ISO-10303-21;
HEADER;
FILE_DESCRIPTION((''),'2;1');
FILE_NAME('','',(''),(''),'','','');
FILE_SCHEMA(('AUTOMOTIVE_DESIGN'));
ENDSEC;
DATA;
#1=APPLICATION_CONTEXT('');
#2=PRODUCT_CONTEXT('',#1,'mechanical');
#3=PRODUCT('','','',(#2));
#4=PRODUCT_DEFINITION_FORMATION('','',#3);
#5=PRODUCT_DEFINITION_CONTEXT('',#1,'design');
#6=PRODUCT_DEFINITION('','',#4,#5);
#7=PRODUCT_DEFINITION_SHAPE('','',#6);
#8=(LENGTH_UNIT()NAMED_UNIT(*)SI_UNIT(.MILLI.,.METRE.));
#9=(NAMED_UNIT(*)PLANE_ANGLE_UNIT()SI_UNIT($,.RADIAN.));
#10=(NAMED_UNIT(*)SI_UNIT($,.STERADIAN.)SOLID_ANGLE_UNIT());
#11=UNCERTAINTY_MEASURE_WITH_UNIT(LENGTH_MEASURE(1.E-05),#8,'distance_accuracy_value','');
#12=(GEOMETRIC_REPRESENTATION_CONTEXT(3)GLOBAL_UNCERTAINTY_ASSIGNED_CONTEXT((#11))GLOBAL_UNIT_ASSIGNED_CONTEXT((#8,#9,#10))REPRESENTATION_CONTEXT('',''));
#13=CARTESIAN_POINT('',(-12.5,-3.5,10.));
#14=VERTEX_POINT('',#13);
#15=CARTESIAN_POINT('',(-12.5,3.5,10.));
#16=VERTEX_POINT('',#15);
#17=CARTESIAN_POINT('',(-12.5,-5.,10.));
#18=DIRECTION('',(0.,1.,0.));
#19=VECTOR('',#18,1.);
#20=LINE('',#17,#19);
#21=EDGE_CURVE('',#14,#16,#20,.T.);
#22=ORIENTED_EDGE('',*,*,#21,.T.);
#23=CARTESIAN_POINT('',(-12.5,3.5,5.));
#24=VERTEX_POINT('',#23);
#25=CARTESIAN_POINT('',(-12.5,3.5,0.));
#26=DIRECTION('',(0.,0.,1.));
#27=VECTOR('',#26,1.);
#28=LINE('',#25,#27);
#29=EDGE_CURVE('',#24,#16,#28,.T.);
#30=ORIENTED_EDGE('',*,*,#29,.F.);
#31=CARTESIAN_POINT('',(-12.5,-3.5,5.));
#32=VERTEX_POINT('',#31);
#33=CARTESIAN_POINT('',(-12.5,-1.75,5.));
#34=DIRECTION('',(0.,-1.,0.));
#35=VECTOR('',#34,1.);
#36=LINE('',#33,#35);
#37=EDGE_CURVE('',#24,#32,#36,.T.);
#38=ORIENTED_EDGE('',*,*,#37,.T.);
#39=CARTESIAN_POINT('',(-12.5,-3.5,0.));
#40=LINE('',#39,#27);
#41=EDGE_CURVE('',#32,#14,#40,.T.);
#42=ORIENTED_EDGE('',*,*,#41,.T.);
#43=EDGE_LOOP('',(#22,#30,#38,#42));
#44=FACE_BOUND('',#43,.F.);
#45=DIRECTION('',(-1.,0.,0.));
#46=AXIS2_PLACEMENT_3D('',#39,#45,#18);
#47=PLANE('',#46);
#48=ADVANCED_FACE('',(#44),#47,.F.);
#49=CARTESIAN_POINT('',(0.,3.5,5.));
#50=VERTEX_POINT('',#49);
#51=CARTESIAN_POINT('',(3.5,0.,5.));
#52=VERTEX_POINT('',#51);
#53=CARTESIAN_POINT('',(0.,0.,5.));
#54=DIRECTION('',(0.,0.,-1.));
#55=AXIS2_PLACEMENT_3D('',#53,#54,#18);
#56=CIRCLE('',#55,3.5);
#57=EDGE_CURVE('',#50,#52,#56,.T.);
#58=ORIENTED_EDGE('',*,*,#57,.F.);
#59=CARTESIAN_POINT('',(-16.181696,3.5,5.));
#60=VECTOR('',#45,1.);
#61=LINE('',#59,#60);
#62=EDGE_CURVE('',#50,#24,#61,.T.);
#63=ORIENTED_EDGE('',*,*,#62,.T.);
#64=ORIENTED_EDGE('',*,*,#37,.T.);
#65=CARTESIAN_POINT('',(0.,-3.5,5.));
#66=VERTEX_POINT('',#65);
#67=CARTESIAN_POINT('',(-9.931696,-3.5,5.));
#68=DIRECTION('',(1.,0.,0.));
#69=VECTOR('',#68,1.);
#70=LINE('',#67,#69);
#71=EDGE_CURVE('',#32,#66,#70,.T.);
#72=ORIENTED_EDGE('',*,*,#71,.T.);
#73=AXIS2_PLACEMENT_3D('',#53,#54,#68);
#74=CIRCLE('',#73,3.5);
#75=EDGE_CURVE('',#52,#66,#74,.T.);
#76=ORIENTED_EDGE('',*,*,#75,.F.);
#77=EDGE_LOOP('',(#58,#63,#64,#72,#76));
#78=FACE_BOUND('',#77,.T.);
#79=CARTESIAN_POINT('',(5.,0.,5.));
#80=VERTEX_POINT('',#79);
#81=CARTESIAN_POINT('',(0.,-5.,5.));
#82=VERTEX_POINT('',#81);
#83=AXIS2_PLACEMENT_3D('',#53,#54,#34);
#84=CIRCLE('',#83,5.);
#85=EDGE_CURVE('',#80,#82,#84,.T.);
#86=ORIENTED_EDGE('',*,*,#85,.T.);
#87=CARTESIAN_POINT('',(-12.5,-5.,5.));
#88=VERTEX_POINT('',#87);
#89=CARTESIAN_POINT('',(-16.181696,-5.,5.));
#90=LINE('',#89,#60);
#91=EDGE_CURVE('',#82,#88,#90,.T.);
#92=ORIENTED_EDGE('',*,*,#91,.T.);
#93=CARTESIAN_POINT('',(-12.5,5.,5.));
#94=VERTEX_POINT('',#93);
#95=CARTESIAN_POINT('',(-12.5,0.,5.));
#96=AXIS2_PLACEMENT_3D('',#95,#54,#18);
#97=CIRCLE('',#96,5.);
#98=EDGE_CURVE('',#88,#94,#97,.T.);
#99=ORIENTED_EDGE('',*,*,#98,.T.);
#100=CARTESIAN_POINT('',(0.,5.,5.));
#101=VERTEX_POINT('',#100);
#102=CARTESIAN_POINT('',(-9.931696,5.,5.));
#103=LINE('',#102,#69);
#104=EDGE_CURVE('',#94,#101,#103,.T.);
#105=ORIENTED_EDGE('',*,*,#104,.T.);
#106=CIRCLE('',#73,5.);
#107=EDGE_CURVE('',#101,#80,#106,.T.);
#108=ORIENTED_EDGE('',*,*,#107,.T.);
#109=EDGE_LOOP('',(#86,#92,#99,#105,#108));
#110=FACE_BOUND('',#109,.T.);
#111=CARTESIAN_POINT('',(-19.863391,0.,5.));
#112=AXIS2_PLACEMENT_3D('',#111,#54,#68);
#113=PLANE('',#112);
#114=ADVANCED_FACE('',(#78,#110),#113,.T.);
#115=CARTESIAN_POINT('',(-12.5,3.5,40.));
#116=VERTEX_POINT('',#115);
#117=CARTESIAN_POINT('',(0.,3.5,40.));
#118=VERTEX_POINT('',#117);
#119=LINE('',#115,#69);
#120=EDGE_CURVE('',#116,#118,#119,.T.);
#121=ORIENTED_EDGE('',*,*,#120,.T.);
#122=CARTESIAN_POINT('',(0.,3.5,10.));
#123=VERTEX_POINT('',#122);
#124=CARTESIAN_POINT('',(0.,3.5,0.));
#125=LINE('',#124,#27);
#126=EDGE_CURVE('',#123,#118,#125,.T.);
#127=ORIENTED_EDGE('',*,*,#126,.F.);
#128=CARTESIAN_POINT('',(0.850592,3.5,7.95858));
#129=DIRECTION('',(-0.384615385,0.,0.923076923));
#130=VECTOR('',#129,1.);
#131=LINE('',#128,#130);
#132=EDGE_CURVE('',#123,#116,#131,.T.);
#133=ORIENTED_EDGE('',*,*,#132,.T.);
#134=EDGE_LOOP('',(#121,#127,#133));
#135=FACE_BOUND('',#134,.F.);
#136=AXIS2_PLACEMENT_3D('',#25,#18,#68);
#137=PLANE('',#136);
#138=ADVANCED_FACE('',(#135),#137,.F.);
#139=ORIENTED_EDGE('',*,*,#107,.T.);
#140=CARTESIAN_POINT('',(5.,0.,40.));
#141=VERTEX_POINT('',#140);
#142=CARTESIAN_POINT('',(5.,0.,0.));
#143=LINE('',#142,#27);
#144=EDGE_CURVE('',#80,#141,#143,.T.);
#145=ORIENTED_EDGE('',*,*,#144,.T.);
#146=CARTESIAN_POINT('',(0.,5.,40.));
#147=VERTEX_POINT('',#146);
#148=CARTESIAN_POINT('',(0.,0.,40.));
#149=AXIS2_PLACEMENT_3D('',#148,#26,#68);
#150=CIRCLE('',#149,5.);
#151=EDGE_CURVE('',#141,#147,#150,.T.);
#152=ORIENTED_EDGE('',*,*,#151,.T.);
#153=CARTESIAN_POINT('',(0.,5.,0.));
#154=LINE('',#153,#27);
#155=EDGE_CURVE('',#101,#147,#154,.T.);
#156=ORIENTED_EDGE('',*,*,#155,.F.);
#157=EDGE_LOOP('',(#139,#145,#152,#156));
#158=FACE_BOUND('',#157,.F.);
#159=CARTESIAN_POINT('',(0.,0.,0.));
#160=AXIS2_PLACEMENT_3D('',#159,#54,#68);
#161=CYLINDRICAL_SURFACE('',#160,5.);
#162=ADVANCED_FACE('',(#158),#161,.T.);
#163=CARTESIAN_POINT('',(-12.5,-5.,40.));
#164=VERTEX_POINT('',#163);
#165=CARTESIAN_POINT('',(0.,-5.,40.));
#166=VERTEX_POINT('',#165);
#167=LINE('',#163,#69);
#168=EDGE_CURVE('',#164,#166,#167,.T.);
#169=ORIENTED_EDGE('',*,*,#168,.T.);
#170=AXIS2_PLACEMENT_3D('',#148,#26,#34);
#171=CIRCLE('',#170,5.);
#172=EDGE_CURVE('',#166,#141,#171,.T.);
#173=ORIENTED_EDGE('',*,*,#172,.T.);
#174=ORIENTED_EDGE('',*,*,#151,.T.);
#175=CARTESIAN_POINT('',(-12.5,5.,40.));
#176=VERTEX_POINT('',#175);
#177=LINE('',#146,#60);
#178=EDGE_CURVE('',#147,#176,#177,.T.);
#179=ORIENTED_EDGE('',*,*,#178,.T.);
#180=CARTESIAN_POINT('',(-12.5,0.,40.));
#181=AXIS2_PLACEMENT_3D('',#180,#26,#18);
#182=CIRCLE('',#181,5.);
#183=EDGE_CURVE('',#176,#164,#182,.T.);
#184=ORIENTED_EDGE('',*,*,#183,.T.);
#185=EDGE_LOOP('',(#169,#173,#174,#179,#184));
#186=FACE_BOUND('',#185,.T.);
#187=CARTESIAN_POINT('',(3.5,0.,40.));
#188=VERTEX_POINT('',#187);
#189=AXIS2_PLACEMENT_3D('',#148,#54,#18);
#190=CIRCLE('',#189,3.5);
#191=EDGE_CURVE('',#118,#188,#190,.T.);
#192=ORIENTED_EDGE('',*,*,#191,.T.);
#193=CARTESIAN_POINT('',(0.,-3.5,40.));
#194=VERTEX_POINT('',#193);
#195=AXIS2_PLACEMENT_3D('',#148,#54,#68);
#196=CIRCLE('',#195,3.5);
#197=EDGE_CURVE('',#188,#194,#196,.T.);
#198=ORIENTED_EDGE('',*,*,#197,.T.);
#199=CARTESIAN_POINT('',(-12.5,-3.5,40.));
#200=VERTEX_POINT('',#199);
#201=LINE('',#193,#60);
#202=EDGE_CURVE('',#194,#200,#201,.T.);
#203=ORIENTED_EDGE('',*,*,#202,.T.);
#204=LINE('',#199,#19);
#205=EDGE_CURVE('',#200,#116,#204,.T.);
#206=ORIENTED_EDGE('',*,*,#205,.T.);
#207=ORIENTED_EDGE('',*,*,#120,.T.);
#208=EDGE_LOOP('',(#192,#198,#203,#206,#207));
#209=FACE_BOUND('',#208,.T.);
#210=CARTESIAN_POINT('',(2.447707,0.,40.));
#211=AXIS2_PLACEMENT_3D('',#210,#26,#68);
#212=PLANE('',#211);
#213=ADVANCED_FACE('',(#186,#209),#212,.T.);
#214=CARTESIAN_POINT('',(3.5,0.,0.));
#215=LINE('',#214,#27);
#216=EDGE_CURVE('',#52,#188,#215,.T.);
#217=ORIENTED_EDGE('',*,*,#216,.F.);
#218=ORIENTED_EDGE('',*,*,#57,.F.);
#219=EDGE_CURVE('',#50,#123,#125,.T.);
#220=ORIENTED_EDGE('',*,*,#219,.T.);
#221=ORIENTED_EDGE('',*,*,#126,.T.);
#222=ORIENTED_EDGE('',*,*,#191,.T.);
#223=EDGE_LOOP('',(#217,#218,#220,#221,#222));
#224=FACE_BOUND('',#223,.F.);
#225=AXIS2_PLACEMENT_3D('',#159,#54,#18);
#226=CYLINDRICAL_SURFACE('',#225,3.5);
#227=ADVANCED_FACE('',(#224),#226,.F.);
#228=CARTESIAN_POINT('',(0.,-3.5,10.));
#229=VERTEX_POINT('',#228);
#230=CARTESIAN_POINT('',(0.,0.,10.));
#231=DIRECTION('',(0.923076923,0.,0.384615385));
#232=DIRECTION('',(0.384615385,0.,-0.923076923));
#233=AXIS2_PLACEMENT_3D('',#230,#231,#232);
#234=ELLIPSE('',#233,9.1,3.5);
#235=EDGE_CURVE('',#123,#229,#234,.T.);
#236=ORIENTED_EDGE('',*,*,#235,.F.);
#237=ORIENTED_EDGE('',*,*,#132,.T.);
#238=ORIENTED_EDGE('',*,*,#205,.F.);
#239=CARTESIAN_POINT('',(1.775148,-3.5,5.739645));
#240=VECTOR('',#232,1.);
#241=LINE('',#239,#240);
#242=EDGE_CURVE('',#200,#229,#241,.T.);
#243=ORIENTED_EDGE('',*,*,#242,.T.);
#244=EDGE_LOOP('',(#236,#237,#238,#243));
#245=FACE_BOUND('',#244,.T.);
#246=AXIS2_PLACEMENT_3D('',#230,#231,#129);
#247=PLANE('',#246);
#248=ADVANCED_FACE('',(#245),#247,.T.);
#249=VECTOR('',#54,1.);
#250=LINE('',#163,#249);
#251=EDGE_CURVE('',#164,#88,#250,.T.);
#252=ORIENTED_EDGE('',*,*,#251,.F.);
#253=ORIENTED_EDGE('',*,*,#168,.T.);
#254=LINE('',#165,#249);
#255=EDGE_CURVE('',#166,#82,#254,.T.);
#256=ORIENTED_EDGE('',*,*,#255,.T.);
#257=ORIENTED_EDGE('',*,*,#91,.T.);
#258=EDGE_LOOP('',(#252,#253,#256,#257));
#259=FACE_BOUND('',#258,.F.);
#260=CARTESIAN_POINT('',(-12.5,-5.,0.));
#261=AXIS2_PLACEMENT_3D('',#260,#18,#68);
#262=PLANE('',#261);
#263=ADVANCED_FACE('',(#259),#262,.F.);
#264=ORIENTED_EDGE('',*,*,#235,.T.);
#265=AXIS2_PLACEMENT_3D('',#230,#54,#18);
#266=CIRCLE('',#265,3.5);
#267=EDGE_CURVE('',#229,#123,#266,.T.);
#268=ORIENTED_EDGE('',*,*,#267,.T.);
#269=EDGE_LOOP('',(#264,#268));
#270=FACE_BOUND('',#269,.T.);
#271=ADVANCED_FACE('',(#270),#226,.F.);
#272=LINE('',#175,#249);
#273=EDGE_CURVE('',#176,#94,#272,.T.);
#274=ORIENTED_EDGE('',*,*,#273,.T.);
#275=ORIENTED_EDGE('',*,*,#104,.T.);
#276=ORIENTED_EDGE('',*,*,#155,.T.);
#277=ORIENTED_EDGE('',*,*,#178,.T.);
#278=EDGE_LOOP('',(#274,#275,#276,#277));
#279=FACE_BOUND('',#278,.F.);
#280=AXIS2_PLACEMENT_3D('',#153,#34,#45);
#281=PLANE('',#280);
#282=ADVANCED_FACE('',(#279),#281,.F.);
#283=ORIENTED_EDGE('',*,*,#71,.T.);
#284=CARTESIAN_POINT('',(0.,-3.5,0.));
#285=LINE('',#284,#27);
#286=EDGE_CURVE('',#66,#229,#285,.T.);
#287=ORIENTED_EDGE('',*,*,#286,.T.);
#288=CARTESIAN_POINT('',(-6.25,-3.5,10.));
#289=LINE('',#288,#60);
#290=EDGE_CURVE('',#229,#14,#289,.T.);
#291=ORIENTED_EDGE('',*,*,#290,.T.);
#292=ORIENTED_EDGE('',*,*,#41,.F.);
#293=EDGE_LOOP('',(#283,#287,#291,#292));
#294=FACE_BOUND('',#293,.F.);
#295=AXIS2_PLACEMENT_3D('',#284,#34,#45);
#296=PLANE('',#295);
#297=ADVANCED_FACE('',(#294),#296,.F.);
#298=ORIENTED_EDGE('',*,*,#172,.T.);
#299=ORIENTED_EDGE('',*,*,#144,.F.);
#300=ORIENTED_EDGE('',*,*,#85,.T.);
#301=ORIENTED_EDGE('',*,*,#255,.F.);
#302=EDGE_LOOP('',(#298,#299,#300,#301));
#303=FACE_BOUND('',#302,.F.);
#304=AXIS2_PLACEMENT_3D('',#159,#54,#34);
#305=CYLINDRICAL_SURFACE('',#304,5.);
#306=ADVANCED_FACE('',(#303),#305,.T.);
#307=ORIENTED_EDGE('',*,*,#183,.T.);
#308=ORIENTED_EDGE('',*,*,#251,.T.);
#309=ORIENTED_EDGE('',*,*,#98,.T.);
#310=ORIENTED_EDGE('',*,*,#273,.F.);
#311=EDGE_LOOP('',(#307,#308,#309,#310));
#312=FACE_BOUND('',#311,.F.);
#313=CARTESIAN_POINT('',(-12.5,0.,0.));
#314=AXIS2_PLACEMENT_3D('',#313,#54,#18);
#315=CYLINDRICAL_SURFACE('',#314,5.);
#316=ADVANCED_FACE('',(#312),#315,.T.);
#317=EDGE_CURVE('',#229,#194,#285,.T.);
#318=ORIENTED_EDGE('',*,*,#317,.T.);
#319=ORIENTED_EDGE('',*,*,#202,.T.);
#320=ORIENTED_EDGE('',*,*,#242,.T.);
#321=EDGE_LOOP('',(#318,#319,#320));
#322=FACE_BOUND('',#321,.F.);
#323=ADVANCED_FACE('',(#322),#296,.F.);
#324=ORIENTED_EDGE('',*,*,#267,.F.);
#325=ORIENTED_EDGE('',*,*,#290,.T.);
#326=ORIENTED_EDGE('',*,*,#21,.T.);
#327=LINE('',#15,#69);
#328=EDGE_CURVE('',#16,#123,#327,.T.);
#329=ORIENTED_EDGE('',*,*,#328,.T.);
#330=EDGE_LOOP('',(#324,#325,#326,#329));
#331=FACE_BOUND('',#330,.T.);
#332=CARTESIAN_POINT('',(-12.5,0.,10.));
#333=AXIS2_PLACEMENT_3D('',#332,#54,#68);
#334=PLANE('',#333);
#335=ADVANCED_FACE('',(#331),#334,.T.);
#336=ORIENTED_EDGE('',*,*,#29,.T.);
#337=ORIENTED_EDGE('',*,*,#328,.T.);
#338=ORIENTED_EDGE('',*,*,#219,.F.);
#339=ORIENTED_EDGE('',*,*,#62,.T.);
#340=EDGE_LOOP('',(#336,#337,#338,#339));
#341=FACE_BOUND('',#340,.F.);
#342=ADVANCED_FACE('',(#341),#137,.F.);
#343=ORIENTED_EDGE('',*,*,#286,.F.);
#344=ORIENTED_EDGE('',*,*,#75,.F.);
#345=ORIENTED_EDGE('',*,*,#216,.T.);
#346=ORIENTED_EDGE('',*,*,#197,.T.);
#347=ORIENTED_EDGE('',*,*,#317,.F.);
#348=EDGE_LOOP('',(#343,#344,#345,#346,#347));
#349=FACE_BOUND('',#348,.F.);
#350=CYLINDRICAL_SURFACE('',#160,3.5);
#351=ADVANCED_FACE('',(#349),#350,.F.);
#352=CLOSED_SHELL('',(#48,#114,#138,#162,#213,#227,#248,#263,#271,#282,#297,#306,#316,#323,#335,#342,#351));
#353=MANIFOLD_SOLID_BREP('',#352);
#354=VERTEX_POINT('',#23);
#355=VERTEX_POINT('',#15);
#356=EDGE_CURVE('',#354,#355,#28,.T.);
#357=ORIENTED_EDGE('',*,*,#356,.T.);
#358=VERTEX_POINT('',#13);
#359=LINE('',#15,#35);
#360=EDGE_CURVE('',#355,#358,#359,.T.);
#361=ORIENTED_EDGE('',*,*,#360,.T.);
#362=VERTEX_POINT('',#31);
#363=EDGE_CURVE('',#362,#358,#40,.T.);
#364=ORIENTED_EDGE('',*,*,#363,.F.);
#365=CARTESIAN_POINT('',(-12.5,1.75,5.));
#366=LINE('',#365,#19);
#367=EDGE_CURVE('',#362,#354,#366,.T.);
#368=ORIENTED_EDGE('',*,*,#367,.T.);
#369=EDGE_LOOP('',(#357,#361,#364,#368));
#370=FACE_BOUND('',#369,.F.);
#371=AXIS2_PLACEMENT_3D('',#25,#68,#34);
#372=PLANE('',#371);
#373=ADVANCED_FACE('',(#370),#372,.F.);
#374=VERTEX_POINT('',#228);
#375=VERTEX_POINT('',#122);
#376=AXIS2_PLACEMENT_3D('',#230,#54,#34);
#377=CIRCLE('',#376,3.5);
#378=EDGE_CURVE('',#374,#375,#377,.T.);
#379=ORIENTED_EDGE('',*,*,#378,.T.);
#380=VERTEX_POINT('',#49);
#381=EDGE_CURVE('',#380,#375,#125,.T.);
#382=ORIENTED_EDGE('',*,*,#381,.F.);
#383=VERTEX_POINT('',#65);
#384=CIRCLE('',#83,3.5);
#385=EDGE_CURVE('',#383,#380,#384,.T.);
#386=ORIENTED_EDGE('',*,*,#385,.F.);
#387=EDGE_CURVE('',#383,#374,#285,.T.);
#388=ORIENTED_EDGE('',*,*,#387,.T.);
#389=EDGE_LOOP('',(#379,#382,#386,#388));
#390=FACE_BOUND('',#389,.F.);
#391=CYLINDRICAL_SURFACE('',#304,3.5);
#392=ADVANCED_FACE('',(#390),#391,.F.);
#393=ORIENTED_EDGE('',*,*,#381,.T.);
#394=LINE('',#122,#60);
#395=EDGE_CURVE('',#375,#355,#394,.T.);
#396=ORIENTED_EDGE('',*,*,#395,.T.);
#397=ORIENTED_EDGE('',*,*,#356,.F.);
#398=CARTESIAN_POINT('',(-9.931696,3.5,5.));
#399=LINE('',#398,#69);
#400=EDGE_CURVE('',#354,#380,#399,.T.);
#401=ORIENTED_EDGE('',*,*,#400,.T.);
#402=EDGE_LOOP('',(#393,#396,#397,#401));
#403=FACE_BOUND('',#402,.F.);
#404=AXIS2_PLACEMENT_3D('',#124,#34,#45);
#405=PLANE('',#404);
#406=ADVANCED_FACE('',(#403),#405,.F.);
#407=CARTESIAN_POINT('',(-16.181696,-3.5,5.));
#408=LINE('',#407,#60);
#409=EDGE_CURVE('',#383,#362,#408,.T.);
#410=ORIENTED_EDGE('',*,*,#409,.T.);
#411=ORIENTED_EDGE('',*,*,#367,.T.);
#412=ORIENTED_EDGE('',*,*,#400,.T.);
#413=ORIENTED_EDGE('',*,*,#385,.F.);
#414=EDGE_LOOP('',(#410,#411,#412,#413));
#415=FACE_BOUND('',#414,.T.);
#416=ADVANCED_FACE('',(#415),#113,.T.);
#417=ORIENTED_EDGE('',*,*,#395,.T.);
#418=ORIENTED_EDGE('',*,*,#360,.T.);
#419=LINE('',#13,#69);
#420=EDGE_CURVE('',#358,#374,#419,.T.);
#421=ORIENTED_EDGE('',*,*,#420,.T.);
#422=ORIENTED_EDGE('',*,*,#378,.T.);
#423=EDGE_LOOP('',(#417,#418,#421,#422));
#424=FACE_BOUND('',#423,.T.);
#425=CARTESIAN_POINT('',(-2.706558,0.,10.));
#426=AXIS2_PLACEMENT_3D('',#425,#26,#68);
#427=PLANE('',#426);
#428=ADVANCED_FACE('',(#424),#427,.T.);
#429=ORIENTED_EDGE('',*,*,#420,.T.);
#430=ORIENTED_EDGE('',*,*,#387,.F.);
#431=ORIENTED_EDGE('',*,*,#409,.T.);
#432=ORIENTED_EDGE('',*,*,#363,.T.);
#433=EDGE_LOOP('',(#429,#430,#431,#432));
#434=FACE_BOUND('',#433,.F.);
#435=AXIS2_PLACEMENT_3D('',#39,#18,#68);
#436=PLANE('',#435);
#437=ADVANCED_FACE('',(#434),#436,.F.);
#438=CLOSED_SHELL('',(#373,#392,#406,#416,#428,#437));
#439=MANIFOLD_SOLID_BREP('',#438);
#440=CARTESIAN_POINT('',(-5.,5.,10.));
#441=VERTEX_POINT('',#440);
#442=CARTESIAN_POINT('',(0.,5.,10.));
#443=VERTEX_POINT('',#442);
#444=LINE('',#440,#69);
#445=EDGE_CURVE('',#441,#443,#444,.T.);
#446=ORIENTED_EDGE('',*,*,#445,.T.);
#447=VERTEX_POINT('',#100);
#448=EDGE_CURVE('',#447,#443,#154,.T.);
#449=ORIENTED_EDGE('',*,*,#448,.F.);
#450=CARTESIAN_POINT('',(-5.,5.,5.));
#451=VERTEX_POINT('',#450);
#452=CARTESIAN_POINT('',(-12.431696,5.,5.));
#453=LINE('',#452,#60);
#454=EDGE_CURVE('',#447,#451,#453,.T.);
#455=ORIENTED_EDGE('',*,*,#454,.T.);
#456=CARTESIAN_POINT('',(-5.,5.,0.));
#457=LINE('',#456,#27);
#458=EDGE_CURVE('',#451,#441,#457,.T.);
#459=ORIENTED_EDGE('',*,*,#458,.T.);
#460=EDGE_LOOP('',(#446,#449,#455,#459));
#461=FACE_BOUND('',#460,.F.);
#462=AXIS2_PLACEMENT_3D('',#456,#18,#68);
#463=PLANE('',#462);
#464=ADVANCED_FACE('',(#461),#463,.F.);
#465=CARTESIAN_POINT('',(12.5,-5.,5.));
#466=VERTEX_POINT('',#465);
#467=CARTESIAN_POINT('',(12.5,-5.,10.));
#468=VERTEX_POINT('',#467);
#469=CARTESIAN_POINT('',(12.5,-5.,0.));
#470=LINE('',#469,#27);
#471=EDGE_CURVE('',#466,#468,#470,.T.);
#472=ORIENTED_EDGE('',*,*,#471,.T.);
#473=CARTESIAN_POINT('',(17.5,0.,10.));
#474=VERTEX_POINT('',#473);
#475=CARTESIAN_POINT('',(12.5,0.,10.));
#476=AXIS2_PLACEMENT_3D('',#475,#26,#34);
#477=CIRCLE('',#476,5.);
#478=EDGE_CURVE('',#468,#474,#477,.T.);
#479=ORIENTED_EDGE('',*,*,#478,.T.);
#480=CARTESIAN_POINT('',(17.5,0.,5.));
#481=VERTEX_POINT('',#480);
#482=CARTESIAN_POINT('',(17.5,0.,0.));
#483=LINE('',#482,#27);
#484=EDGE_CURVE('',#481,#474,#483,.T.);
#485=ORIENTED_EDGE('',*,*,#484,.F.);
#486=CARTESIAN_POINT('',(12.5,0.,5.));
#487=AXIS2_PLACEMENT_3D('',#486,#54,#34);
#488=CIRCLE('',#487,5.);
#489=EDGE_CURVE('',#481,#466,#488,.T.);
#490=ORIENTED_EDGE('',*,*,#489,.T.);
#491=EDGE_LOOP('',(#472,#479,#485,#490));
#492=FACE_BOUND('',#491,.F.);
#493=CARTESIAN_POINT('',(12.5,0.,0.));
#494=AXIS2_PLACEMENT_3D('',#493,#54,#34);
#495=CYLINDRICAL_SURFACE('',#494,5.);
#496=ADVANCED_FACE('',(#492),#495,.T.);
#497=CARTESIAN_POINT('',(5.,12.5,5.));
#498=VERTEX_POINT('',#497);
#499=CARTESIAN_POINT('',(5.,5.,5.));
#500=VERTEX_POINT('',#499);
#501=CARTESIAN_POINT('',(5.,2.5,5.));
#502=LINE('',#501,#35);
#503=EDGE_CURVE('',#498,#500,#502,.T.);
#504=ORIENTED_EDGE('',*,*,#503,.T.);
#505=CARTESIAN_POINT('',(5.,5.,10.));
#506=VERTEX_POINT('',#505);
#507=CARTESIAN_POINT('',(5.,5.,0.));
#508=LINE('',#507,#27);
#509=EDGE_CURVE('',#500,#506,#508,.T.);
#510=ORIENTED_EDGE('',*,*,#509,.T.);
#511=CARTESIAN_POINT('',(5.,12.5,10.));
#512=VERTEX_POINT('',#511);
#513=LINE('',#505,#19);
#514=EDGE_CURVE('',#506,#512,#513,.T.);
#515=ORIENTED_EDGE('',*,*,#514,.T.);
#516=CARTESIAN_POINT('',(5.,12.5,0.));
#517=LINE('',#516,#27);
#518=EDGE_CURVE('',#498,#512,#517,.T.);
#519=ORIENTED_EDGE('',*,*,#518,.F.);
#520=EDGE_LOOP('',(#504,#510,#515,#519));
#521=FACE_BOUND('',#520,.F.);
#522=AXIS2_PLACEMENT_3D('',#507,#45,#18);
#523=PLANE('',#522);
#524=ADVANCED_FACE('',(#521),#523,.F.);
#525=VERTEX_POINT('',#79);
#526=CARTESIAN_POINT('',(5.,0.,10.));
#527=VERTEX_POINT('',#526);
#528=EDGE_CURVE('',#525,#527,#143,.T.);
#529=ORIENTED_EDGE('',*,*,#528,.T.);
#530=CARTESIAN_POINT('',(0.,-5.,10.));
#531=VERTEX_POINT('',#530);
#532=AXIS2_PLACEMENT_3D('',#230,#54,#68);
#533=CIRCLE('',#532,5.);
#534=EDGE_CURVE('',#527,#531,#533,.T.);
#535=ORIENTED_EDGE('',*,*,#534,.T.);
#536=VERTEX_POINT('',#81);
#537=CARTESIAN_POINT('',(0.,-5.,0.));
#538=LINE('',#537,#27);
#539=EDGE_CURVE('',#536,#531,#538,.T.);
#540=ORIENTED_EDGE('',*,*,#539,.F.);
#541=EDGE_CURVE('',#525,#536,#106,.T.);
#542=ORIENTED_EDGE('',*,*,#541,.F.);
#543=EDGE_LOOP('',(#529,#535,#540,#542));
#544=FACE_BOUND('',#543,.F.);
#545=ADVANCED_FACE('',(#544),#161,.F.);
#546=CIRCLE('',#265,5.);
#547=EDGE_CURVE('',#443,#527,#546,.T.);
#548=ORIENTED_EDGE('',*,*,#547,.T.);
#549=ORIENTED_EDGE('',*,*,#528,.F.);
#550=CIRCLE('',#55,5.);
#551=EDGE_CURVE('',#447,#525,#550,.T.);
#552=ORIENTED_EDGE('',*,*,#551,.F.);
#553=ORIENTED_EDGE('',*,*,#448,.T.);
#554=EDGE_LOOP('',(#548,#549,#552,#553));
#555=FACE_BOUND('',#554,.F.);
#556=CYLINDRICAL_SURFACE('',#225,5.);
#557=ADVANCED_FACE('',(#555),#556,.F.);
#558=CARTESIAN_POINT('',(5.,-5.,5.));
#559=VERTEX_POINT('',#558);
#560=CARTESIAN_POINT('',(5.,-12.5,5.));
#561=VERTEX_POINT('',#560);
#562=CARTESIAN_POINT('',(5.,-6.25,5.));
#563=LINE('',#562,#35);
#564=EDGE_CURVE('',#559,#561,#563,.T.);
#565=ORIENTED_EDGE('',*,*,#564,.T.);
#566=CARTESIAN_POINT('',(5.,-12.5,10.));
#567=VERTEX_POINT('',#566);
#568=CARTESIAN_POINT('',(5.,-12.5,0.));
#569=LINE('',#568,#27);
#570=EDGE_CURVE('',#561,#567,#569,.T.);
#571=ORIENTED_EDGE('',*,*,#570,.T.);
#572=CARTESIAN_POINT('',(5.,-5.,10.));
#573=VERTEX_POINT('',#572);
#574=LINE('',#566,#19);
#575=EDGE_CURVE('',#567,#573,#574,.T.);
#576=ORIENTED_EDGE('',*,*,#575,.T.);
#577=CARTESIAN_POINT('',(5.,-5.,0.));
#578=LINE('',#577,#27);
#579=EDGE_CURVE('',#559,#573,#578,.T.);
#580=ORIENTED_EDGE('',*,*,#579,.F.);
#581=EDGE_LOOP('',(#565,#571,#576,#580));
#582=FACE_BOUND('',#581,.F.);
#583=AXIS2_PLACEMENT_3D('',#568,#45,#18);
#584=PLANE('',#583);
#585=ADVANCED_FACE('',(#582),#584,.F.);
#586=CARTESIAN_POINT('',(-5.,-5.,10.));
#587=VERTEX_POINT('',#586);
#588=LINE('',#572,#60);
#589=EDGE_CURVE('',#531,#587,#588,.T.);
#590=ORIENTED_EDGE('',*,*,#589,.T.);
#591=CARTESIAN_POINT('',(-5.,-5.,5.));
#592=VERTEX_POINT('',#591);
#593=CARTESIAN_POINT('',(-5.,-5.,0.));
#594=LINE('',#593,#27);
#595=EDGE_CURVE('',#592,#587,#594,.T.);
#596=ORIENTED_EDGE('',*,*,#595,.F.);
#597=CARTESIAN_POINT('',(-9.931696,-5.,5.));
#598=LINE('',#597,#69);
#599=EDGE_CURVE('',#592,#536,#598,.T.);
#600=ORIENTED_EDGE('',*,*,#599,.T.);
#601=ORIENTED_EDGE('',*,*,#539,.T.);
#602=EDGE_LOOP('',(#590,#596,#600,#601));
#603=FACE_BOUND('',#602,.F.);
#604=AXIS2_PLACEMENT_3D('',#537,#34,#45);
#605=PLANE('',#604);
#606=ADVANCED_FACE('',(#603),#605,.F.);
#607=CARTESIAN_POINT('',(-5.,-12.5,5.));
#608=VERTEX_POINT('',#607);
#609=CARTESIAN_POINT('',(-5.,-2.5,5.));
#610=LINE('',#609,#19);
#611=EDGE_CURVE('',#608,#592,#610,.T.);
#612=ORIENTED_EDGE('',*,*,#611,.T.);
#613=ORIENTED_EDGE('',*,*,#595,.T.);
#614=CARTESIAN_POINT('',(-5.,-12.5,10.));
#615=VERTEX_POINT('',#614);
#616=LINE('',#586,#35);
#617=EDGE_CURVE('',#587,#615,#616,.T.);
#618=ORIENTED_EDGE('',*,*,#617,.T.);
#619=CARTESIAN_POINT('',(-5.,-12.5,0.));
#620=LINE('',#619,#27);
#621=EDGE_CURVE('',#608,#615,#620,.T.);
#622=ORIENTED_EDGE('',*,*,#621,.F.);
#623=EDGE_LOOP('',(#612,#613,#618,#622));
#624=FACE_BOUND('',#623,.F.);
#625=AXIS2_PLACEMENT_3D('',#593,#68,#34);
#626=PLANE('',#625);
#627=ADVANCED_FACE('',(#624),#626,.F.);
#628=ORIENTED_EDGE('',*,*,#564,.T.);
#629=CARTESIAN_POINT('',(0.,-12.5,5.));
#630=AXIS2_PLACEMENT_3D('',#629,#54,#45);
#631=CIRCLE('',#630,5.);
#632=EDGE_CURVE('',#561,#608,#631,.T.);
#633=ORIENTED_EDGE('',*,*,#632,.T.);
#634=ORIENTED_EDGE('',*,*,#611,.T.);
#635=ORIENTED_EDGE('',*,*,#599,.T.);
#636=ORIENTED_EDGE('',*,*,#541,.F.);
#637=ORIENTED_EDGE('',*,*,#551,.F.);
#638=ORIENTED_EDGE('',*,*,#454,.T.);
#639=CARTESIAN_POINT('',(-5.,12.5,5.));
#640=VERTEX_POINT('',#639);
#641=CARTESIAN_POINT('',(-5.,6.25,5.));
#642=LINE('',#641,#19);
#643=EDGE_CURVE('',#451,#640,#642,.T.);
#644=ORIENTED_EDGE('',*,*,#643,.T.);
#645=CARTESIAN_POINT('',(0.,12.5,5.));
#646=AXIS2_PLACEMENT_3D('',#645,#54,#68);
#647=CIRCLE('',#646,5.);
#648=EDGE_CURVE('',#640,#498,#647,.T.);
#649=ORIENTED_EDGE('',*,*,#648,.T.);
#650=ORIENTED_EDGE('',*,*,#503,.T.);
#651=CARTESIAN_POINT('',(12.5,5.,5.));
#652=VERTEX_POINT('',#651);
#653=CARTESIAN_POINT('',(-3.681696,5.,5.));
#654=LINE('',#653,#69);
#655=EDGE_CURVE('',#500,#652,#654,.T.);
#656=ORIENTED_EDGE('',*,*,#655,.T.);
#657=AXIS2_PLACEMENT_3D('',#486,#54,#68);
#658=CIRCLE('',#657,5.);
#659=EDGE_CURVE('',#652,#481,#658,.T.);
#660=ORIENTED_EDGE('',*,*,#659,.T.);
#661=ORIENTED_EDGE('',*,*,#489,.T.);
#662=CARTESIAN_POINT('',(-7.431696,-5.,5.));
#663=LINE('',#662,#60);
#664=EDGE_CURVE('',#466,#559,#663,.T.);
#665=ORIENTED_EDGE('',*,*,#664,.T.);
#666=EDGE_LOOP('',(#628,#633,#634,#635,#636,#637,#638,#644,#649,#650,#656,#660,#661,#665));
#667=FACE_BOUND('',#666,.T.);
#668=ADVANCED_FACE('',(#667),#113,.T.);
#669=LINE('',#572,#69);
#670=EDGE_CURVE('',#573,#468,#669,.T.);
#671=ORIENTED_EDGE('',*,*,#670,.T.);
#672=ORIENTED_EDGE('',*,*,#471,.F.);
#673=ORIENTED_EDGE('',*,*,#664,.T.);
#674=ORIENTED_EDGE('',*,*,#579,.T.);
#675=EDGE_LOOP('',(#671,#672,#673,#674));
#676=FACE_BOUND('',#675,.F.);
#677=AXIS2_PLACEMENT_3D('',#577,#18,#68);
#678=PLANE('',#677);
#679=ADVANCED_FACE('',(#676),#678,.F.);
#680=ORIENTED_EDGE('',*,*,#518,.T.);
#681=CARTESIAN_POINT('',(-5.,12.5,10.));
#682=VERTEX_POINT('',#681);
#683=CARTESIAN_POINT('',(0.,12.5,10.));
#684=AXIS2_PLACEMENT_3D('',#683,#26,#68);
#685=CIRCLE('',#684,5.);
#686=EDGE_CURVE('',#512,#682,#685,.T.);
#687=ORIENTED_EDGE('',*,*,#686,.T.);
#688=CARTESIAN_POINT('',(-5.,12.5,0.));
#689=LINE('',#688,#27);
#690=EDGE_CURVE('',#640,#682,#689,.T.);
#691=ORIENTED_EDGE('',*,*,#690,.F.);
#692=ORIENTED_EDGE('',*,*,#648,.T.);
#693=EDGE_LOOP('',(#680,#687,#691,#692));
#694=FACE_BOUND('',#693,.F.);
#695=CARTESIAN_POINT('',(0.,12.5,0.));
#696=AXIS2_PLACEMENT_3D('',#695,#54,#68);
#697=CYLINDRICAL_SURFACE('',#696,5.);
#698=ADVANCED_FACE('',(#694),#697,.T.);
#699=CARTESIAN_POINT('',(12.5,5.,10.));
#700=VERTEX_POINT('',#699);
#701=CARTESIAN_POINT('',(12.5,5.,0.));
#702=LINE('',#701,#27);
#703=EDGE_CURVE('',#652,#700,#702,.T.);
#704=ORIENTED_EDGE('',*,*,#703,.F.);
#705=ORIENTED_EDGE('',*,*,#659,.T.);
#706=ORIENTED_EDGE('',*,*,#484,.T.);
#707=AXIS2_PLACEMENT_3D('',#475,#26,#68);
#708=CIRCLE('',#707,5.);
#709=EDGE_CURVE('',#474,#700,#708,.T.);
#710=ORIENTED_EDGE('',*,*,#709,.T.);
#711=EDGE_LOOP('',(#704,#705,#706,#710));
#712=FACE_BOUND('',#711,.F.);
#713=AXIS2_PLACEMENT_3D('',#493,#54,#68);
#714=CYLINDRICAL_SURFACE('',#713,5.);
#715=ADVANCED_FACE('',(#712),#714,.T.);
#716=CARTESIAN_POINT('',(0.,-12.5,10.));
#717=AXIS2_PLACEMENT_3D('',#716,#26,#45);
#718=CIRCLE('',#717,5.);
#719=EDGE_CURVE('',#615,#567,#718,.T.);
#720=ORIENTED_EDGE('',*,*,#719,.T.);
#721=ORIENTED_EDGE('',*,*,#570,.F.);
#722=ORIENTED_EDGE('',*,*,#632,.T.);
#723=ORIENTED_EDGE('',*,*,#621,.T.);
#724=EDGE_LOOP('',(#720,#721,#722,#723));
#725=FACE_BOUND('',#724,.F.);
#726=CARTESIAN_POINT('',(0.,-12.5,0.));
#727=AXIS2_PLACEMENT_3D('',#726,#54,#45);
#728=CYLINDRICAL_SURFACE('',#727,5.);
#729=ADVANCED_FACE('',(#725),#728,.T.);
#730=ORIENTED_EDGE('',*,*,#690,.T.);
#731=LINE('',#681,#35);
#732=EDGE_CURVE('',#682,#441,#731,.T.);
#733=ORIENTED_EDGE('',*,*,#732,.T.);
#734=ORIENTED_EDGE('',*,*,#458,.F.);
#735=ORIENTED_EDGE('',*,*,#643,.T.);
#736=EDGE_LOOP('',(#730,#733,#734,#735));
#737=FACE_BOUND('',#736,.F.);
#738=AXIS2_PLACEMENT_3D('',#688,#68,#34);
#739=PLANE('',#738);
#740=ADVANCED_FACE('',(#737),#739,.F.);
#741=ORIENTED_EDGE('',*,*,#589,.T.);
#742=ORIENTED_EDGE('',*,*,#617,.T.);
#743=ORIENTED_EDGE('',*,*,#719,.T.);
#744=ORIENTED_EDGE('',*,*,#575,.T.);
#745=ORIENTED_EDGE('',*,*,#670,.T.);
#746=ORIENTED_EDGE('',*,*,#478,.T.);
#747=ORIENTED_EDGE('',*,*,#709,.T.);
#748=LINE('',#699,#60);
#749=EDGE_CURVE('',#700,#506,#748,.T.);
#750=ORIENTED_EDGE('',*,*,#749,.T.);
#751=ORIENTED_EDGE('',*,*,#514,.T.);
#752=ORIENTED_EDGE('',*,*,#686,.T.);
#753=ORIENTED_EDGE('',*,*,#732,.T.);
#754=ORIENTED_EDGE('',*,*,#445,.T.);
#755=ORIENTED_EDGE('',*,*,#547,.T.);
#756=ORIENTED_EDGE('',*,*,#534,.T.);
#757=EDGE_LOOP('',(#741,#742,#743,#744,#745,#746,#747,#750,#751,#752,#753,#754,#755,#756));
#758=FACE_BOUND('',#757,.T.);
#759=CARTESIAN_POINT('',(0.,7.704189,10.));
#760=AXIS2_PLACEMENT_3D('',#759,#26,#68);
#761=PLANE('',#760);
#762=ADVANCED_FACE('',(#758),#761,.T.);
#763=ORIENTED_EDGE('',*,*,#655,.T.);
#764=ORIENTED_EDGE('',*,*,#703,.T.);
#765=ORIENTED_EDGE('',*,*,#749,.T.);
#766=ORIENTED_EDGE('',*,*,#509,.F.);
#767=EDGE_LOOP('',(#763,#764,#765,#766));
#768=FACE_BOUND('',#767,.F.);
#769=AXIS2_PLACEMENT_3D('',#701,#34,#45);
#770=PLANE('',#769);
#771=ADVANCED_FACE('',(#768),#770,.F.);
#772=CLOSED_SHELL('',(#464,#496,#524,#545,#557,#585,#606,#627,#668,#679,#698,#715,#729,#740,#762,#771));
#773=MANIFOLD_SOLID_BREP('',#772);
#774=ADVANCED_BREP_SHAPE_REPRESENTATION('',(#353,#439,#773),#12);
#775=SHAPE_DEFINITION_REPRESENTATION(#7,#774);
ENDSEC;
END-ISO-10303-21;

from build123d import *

# Parameters (mm, degrees)
F2_DEPTH  = 5
F3_DEPTH  = 40
F4_DEPTH  = 10
F5_DEPTH  = 40
F9_DEPTH  = 3
F10_SIZE  = 2
F12_DEPTH = 20


# Not quite as in the source:
# - a feature of the source that left no trace in its solid (it failed there, or was rolled back) is left out


with BuildPart() as f2:
    # F1 (on Front) → F2 (new body, symmetric)
    with BuildSketch(Plane.XZ):
        Polygon((-12.5, 10), (0, 10), (-12.5, 40), align=None)
    extrude(amount=F2_DEPTH, both=True)

    # F0 (on Top) → F3 (join)
    with BuildSketch(Plane.XY):
        with BuildLine():
            ThreePointArc((0, -5), (3.5355339059, -3.5355339059), (5, 0))
            ThreePointArc((5, 0), (3.5355339059, 3.5355339059), (0, 5))
            Line((0, 5), (0, 3.5))
            ThreePointArc((0, 3.5), (2.4748737342, 2.4748737342), (3.5, 0))
            ThreePointArc((3.5, 0), (2.4748737342, -2.4748737342), (0, -3.5))
            Line((0, -3.5), (0, -5))
        make_face()
        with BuildLine():
            Line((0, 3.5), (0, 5))
            ThreePointArc((0, 5), (-1.9364916731, 4.6097722286), (-3.5707142143, 3.5))
            Line((-3.5707142143, 3.5), (0, 3.5))
        make_face()
        with BuildLine():
            ThreePointArc((-3.5707142143, 3.5), (-1.9364916731, 4.6097722286), (0, 5))
            Line((0, 5), (-5, 5))
            Line((-5, 5), (-5, 3.5))
            Line((-5, 3.5), (-3.5707142143, 3.5))
        make_face()
        with BuildLine():
            Line((-5, 3.5), (-5, 5))
            Line((-5, 5), (-11.4564392374, 5))
            ThreePointArc((-11.4564392374, 5), (-11.4783307541, 4.9495376652), (-11.5, 4.8989794856))
            ThreePointArc((-11.5, 4.8989794856), (-10.1099910027, 4.3917942794), (-8.9292857857, 3.5))
            Line((-8.9292857857, 3.5), (-5, 3.5))
        make_face()
        with BuildLine():
            Line((-12, 3.5), (-8.9292857857, 3.5))
            ThreePointArc((-8.9292857857, 3.5), (-10.1099910027, 4.3917942794), (-11.5, 4.8989794856))
            ThreePointArc((-11.5, 4.8989794856), (-11.7708022624, 4.2069245417), (-12, 3.5))
        make_face()
        with BuildLine():
            ThreePointArc((-12, 3.5), (-11.7708022624, 4.2069245417), (-11.5, 4.8989794856))
            ThreePointArc((-11.5, 4.8989794856), (-11.99745519, 4.974680765), (-12.5, 5))
            Line((-12.5, 5), (-12.5, 3.5))
            Line((-12.5, 3.5), (-12, 3.5))
        make_face()
        with BuildLine():
            ThreePointArc((-12.5, -5), (-11.99745519, -4.974680765), (-11.5, -4.8989794856))
            ThreePointArc((-11.5, -4.8989794856), (-11.7708022624, -4.2069245417), (-12, -3.5))
            Line((-12, -3.5), (-12.5, -3.5))
            Line((-12.5, -3.5), (-12.5, -5))
        make_face()
        with BuildLine():
            ThreePointArc((-11.5, -4.8989794856), (-10.1099910027, -4.3917942794), (-8.9292857857, -3.5))
            Line((-8.9292857857, -3.5), (-12, -3.5))
            ThreePointArc((-12, -3.5), (-11.7708022624, -4.2069245417), (-11.5, -4.8989794856))
        make_face()
        with BuildLine():
            Line((-11.4564392374, -5), (-5, -5))
            Line((-5, -5), (-5, -3.5))
            Line((-5, -3.5), (-8.9292857857, -3.5))
            ThreePointArc((-8.9292857857, -3.5), (-10.1099910027, -4.3917942794), (-11.5, -4.8989794856))
            ThreePointArc((-11.5, -4.8989794856), (-11.4783307541, -4.9495376652), (-11.4564392374, -5))
        make_face()
        with BuildLine():
            Line((-5, -5), (0, -5))
            ThreePointArc((0, -5), (-1.9364916731, -4.6097722286), (-3.5707142143, -3.5))
            Line((-3.5707142143, -3.5), (-5, -3.5))
            Line((-5, -3.5), (-5, -5))
        make_face()
        with BuildLine():
            ThreePointArc((-3.5707142143, -3.5), (-1.9364916731, -4.6097722286), (0, -5))
            Line((0, -5), (0, -3.5))
            Line((0, -3.5), (-3.5707142143, -3.5))
        make_face()
        with BuildLine():
            Line((-12.5, -5), (-11.4564392374, -5))
            ThreePointArc((-11.4564392374, -5), (-11.4783307541, -4.9495376652), (-11.5, -4.8989794856))
            ThreePointArc((-11.5, -4.8989794856), (-11.99745519, -4.974680765), (-12.5, -5))
        make_face()
        with BuildLine():
            ThreePointArc((-11.5, 4.8989794856), (-11.4783307541, 4.9495376652), (-11.4564392374, 5))
            Line((-11.4564392374, 5), (-12.5, 5))
            ThreePointArc((-12.5, 5), (-11.99745519, 4.974680765), (-11.5, 4.8989794856))
        make_face()
        with BuildLine():
            Line((-12.5, 0), (-12.5, 3))
            ThreePointArc((-12.5, 3), (-15.5, 0), (-12.5, -3))
            Line((-12.5, -3), (-12.5, 0))
        make_face()
        with BuildLine():
            Line((-12.5, 3.5), (-12.5, 5))
            ThreePointArc((-12.5, 5), (-17.5, 0), (-12.5, -5))
            Line((-12.5, -5), (-12.5, -3.5))
            Line((-12.5, -3.5), (-12.5, -3))
            ThreePointArc((-12.5, -3), (-15.5, 0), (-12.5, 3))
            Line((-12.5, 3), (-12.5, 3.5))
        make_face()
    extrude(amount=F3_DEPTH)

    # F0 (on Top) → F5 (cut)
    with BuildSketch(Plane.XY):
        with BuildLine():
            ThreePointArc((3.5, 0), (2.4748737342, 2.4748737342), (0, 3.5))
            ThreePointArc((0, 3.5), (-3.5, 0), (0, -3.5))
            ThreePointArc((0, -3.5), (2.4748737342, -2.4748737342), (3.5, 0))
        make_face()
    extrude(amount=F5_DEPTH, mode=Mode.SUBTRACT)


with BuildPart() as f4:
    # F0 (on Top) → F4 (new body)
    with BuildSketch(Plane.XY):
        with BuildLine():
            Line((0, 3.5), (-3.5707142143, 3.5))
            ThreePointArc((-3.5707142143, 3.5), (-4.6289075964, 1.8902948088), (-5, 0))
            ThreePointArc((-5, 0), (-4.6289075964, -1.8902948088), (-3.5707142143, -3.5))
            Line((-3.5707142143, -3.5), (0, -3.5))
            ThreePointArc((0, -3.5), (-3.5, 0), (0, 3.5))
        make_face()
        with BuildLine():
            ThreePointArc((-5, 0), (-4.6289075964, 1.8902948088), (-3.5707142143, 3.5))
            Line((-3.5707142143, 3.5), (-5, 3.5))
            Line((-5, 3.5), (-5, 0))
        make_face()
        with BuildLine():
            Line((-5, -3.5), (-3.5707142143, -3.5))
            ThreePointArc((-3.5707142143, -3.5), (-4.6289075964, -1.8902948088), (-5, 0))
            Line((-5, 0), (-5, -3.5))
        make_face()
        with BuildLine():
            Line((-5, -3.5), (-5, 0))
            Line((-5, 0), (-5, 3.5))
            Line((-5, 3.5), (-8.9292857857, 3.5))
            ThreePointArc((-8.9292857857, 3.5), (-7.8710924036, 1.8902948088), (-7.5, 0))
            ThreePointArc((-7.5, 0), (-7.8710924036, -1.8902948088), (-8.9292857857, -3.5))
            Line((-8.9292857857, -3.5), (-5, -3.5))
        make_face()
        with BuildLine():
            ThreePointArc((-7.5, 0), (-7.8710924036, 1.8902948088), (-8.9292857857, 3.5))
            Line((-8.9292857857, 3.5), (-12, 3.5))
            ThreePointArc((-12, 3.5), (-12.072818108, 3.239917118), (-12.14, 2.978321675))
            ThreePointArc((-12.14, 2.978321675), (-10.2550055679, 1.9899748742), (-9.5, 0))
            ThreePointArc((-9.5, 0), (-10.2550055679, -1.9899748742), (-12.14, -2.978321675))
            ThreePointArc((-12.14, -2.978321675), (-12.072818108, -3.239917118), (-12, -3.5))
            Line((-12, -3.5), (-8.9292857857, -3.5))
            ThreePointArc((-8.9292857857, -3.5), (-7.8710924036, -1.8902948088), (-7.5, 0))
        make_face()
        with BuildLine():
            ThreePointArc((-9.5, 0), (-10.2550055679, 1.9899748742), (-12.14, 2.978321675))
            ThreePointArc((-12.14, 2.978321675), (-12.409673646, 1.5), (-12.5, 0))
            ThreePointArc((-12.5, 0), (-12.409673646, -1.5), (-12.14, -2.978321675))
            ThreePointArc((-12.14, -2.978321675), (-10.2550055679, -1.9899748742), (-9.5, 0))
        make_face()
        with BuildLine():
            ThreePointArc((-12.5, 0), (-12.409673646, 1.5), (-12.14, 2.978321675))
            ThreePointArc((-12.14, 2.978321675), (-12.3196739413, 2.9945755146), (-12.5, 3))
            Line((-12.5, 3), (-12.5, 0))
        make_face()
        with BuildLine():
            ThreePointArc((-12.5, -3), (-12.3196739413, -2.9945755146), (-12.14, -2.978321675))
            ThreePointArc((-12.14, -2.978321675), (-12.409673646, -1.5), (-12.5, 0))
            Line((-12.5, 0), (-12.5, -3))
        make_face()
        with BuildLine():
            Line((-12.5, -3.5), (-12, -3.5))
            ThreePointArc((-12, -3.5), (-12.072818108, -3.239917118), (-12.14, -2.978321675))
            ThreePointArc((-12.14, -2.978321675), (-12.3196739413, -2.9945755146), (-12.5, -3))
            Line((-12.5, -3), (-12.5, -3.5))
        make_face()
        with BuildLine():
            ThreePointArc((-12.14, 2.978321675), (-12.072818108, 3.239917118), (-12, 3.5))
            Line((-12, 3.5), (-12.5, 3.5))
            Line((-12.5, 3.5), (-12.5, 3))
            ThreePointArc((-12.5, 3), (-12.3196739413, 2.9945755146), (-12.14, 2.978321675))
        make_face()
    extrude(amount=F4_DEPTH)


with BuildPart() as f4b:
    # F0 (on Top) → F4, piece 2 (new body)
    with BuildSketch(Plane.XY):
        with BuildLine():
            Line((5, 5), (5, 11.4564392374))
            ThreePointArc((5, 11.4564392374), (4.9495376652, 11.4783307541), (4.8989794856, 11.5))
            ThreePointArc((4.8989794856, 11.5), (0, 7.5), (-4.8989794856, 11.5))
            ThreePointArc((-4.8989794856, 11.5), (-4.9495376652, 11.4783307541), (-5, 11.4564392374))
            Line((-5, 11.4564392374), (-5, 5))
            Line((-5, 5), (0, 5))
            Line((0, 5), (5, 5))
        make_face()
        with BuildLine():
            ThreePointArc((-4.8989794856, 11.5), (0, 7.5), (4.8989794856, 11.5))
            ThreePointArc((4.8989794856, 11.5), (3.9516285749, 11.8589473229), (2.978321675, 12.14))
            ThreePointArc((2.978321675, 12.14), (0, 9.5), (-2.978321675, 12.14))
            ThreePointArc((-2.978321675, 12.14), (-3.9516285749, 11.8589473229), (-4.8989794856, 11.5))
        make_face()
        with BuildLine():
            ThreePointArc((-2.978321675, 12.14), (0, 9.5), (2.978321675, 12.14))
            ThreePointArc((2.978321675, 12.14), (1.5, 12.409673646), (0, 12.5))
            ThreePointArc((0, 12.5), (-1.5, 12.409673646), (-2.978321675, 12.14))
        make_face()
        with BuildLine():
            ThreePointArc((0, 12.5), (1.5, 12.409673646), (2.978321675, 12.14))
            ThreePointArc((2.978321675, 12.14), (2.9945755146, 12.3196739413), (3, 12.5))
            Line((3, 12.5), (0, 12.5))
        make_face()
        with BuildLine():
            ThreePointArc((2.978321675, 12.14), (3.9516285749, 11.8589473229), (4.8989794856, 11.5))
            ThreePointArc((4.8989794856, 11.5), (4.974680765, 11.99745519), (5, 12.5))
            Line((5, 12.5), (3, 12.5))
            ThreePointArc((3, 12.5), (2.9945755146, 12.3196739413), (2.978321675, 12.14))
        make_face()
        with BuildLine():
            Line((3, 12.5), (5, 12.5))
            ThreePointArc((5, 12.5), (0, 17.5), (-5, 12.5))
            Line((-5, 12.5), (-3, 12.5))
            ThreePointArc((-3, 12.5), (0, 15.5), (3, 12.5))
        make_face()
        with BuildLine():
            Line((0, 12.5), (3, 12.5))
            ThreePointArc((3, 12.5), (0, 15.5), (-3, 12.5))
            Line((-3, 12.5), (0, 12.5))
        make_face()
        with BuildLine():
            ThreePointArc((-2.978321675, 12.14), (-1.5, 12.409673646), (0, 12.5))
            Line((0, 12.5), (-3, 12.5))
            ThreePointArc((-3, 12.5), (-2.9945755146, 12.3196739413), (-2.978321675, 12.14))
        make_face()
        with BuildLine():
            ThreePointArc((-5, 12.5), (-4.974680765, 11.99745519), (-4.8989794856, 11.5))
            ThreePointArc((-4.8989794856, 11.5), (-3.9516285749, 11.8589473229), (-2.978321675, 12.14))
            ThreePointArc((-2.978321675, 12.14), (-2.9945755146, 12.3196739413), (-3, 12.5))
            Line((-3, 12.5), (-5, 12.5))
        make_face()
        with BuildLine():
            ThreePointArc((12.14, -2.978321675), (9.5, 0), (12.14, 2.978321675))
            ThreePointArc((12.14, 2.978321675), (11.8589473229, 3.9516285749), (11.5, 4.8989794856))
            ThreePointArc((11.5, 4.8989794856), (7.5, 0), (11.5, -4.8989794856))
            ThreePointArc((11.5, -4.8989794856), (11.8589473229, -3.9516285749), (12.14, -2.978321675))
        make_face()
        with BuildLine():
            ThreePointArc((11.5, 4.8989794856), (11.8589473229, 3.9516285749), (12.14, 2.978321675))
            ThreePointArc((12.14, 2.978321675), (12.3196739413, 2.9945755146), (12.5, 3))
            Line((12.5, 3), (12.5, 5))
            ThreePointArc((12.5, 5), (11.99745519, 4.974680765), (11.5, 4.8989794856))
        make_face()
        with BuildLine():
            Line((12.5, 5), (12.5, 3))
            ThreePointArc((12.5, 3), (14.6213203436, 2.1213203436), (15.5, 0))
            ThreePointArc((15.5, 0), (14.6213203436, -2.1213203436), (12.5, -3))
            Line((12.5, -3), (12.5, -5))
            ThreePointArc((12.5, -5), (16.0355339059, -3.5355339059), (17.5, 0))
            ThreePointArc((17.5, 0), (16.0355339059, 3.5355339059), (12.5, 5))
        make_face()
        with BuildLine():
            Line((12.5, 3), (12.5, 0))
            Line((12.5, 0), (12.5, -3))
            ThreePointArc((12.5, -3), (14.6213203436, -2.1213203436), (15.5, 0))
            ThreePointArc((15.5, 0), (14.6213203436, 2.1213203436), (12.5, 3))
        make_face()
        with BuildLine():
            ThreePointArc((12.14, -2.978321675), (12.409673646, -1.5), (12.5, 0))
            ThreePointArc((12.5, 0), (12.409673646, 1.5), (12.14, 2.978321675))
            ThreePointArc((12.14, 2.978321675), (9.5, 0), (12.14, -2.978321675))
        make_face()
        with BuildLine():
            ThreePointArc((12.14, 2.978321675), (12.409673646, 1.5), (12.5, 0))
            Line((12.5, 0), (12.5, 3))
            ThreePointArc((12.5, 3), (12.3196739413, 2.9945755146), (12.14, 2.978321675))
        make_face()
        with BuildLine():
            Line((12.5, -3), (12.5, 0))
            ThreePointArc((12.5, 0), (12.409673646, -1.5), (12.14, -2.978321675))
            ThreePointArc((12.14, -2.978321675), (12.3196739413, -2.9945755146), (12.5, -3))
        make_face()
        with BuildLine():
            ThreePointArc((12.5, -3), (12.3196739413, -2.9945755146), (12.14, -2.978321675))
            ThreePointArc((12.14, -2.978321675), (11.8589473229, -3.9516285749), (11.5, -4.8989794856))
            ThreePointArc((11.5, -4.8989794856), (11.99745519, -4.974680765), (12.5, -5))
            Line((12.5, -5), (12.5, -3))
        make_face()
        with BuildLine():
            ThreePointArc((11.5, -4.8989794856), (7.5, 0), (11.5, 4.8989794856))
            ThreePointArc((11.5, 4.8989794856), (11.4783307541, 4.9495376652), (11.4564392374, 5))
            Line((11.4564392374, 5), (5, 5))
            Line((5, 5), (5, 0))
            Line((5, 0), (5, -5))
            Line((5, -5), (11.4564392374, -5))
            ThreePointArc((11.4564392374, -5), (11.4783307541, -4.9495376652), (11.5, -4.8989794856))
        make_face()
        with BuildLine():
            ThreePointArc((4.8989794856, 11.5), (4.9495376652, 11.4783307541), (5, 11.4564392374))
            Line((5, 11.4564392374), (5, 12.5))
            ThreePointArc((5, 12.5), (4.974680765, 11.99745519), (4.8989794856, 11.5))
        make_face()
        with BuildLine():
            ThreePointArc((-5, 11.4564392374), (-4.9495376652, 11.4783307541), (-4.8989794856, 11.5))
            ThreePointArc((-4.8989794856, 11.5), (-4.974680765, 11.99745519), (-5, 12.5))
            Line((-5, 12.5), (-5, 11.4564392374))
        make_face()
        with BuildLine():
            ThreePointArc((11.4564392374, 5), (11.4783307541, 4.9495376652), (11.5, 4.8989794856))
            ThreePointArc((11.5, 4.8989794856), (11.99745519, 4.974680765), (12.5, 5))
            Line((12.5, 5), (11.4564392374, 5))
        make_face()
        with BuildLine():
            ThreePointArc((12.5, -5), (11.99745519, -4.974680765), (11.5, -4.8989794856))
            ThreePointArc((11.5, -4.8989794856), (11.4783307541, -4.9495376652), (11.4564392374, -5))
            Line((11.4564392374, -5), (12.5, -5))
        make_face()
        with BuildLine():
            ThreePointArc((-5, -12.5), (0, -17.5), (5, -12.5))
            Line((5, -12.5), (3, -12.5))
            ThreePointArc((3, -12.5), (0, -15.5), (-3, -12.5))
            Line((-3, -12.5), (-5, -12.5))
        make_face()
        with BuildLine():
            ThreePointArc((3, -12.5), (2.9945755146, -12.3196739413), (2.978321675, -12.14))
            ThreePointArc((2.978321675, -12.14), (1.5, -12.409673646), (0, -12.5))
            Line((0, -12.5), (3, -12.5))
        make_face()
        with BuildLine():
            ThreePointArc((5, -12.5), (4.974680765, -11.99745519), (4.8989794856, -11.5))
            ThreePointArc((4.8989794856, -11.5), (3.9516285749, -11.8589473229), (2.978321675, -12.14))
            ThreePointArc((2.978321675, -12.14), (2.9945755146, -12.3196739413), (3, -12.5))
            Line((3, -12.5), (5, -12.5))
        make_face()
        with BuildLine():
            ThreePointArc((-3, -12.5), (0, -15.5), (3, -12.5))
            Line((3, -12.5), (0, -12.5))
            Line((0, -12.5), (-3, -12.5))
        make_face()
        with BuildLine():
            ThreePointArc((0, -12.5), (1.5, -12.409673646), (2.978321675, -12.14))
            ThreePointArc((2.978321675, -12.14), (0, -9.5), (-2.978321675, -12.14))
            ThreePointArc((-2.978321675, -12.14), (-1.5, -12.409673646), (0, -12.5))
        make_face()
        with BuildLine():
            ThreePointArc((2.978321675, -12.14), (3.9516285749, -11.8589473229), (4.8989794856, -11.5))
            ThreePointArc((4.8989794856, -11.5), (0, -7.5), (-4.8989794856, -11.5))
            ThreePointArc((-4.8989794856, -11.5), (-3.9516285749, -11.8589473229), (-2.978321675, -12.14))
            ThreePointArc((-2.978321675, -12.14), (0, -9.5), (2.978321675, -12.14))
        make_face()
        with BuildLine():
            ThreePointArc((-2.978321675, -12.14), (-3.9516285749, -11.8589473229), (-4.8989794856, -11.5))
            ThreePointArc((-4.8989794856, -11.5), (-4.974680765, -11.99745519), (-5, -12.5))
            Line((-5, -12.5), (-3, -12.5))
            ThreePointArc((-3, -12.5), (-2.9945755146, -12.3196739413), (-2.978321675, -12.14))
        make_face()
        with BuildLine():
            Line((-3, -12.5), (0, -12.5))
            ThreePointArc((0, -12.5), (-1.5, -12.409673646), (-2.978321675, -12.14))
            ThreePointArc((-2.978321675, -12.14), (-2.9945755146, -12.3196739413), (-3, -12.5))
        make_face()
        with BuildLine():
            ThreePointArc((4.8989794856, -11.5), (4.9495376652, -11.4783307541), (5, -11.4564392374))
            Line((5, -11.4564392374), (5, -5))
            Line((5, -5), (0, -5))
            Line((0, -5), (-5, -5))
            Line((-5, -5), (-5, -11.4564392374))
            ThreePointArc((-5, -11.4564392374), (-4.9495376652, -11.4783307541), (-4.8989794856, -11.5))
            ThreePointArc((-4.8989794856, -11.5), (0, -7.5), (4.8989794856, -11.5))
        make_face()
        with BuildLine():
            Line((5, -12.5), (5, -11.4564392374))
            ThreePointArc((5, -11.4564392374), (4.9495376652, -11.4783307541), (4.8989794856, -11.5))
            ThreePointArc((4.8989794856, -11.5), (4.974680765, -11.99745519), (5, -12.5))
        make_face()
        with BuildLine():
            ThreePointArc((-5, -12.5), (-4.974680765, -11.99745519), (-4.8989794856, -11.5))
            ThreePointArc((-4.8989794856, -11.5), (-4.9495376652, -11.4783307541), (-5, -11.4564392374))
            Line((-5, -11.4564392374), (-5, -12.5))
        make_face()
        with BuildLine():
            Line((5, 0), (5, 5))
            Line((5, 5), (0, 5))
            ThreePointArc((0, 5), (3.5355339059, 3.5355339059), (5, 0))
        make_face()
        with BuildLine():
            Line((0, -5), (5, -5))
            Line((5, -5), (5, 0))
            ThreePointArc((5, 0), (3.5355339059, -3.5355339059), (0, -5))
        make_face()
    extrude(amount=F4_DEPTH)

    # F0 (on Top) → F9 (join)
    with BuildSketch(Plane.XY):
        with BuildLine():
            Line((12.5, -3), (12.5, 0))
            ThreePointArc((12.5, 0), (12.409673646, -1.5), (12.14, -2.978321675))
            ThreePointArc((12.14, -2.978321675), (12.3196739413, -2.9945755146), (12.5, -3))
        make_face()
        with BuildLine():
            ThreePointArc((12.14, -2.978321675), (12.409673646, -1.5), (12.5, 0))
            ThreePointArc((12.5, 0), (12.409673646, 1.5), (12.14, 2.978321675))
            ThreePointArc((12.14, 2.978321675), (9.5, 0), (12.14, -2.978321675))
        make_face()
        with BuildLine():
            ThreePointArc((12.14, 2.978321675), (12.409673646, 1.5), (12.5, 0))
            Line((12.5, 0), (12.5, 3))
            ThreePointArc((12.5, 3), (12.3196739413, 2.9945755146), (12.14, 2.978321675))
        make_face()
        with BuildLine():
            Line((12.5, 3), (12.5, 0))
            Line((12.5, 0), (12.5, -3))
            ThreePointArc((12.5, -3), (14.6213203436, -2.1213203436), (15.5, 0))
            ThreePointArc((15.5, 0), (14.6213203436, 2.1213203436), (12.5, 3))
        make_face()
        with BuildLine():
            ThreePointArc((-3, -12.5), (0, -15.5), (3, -12.5))
            Line((3, -12.5), (0, -12.5))
            Line((0, -12.5), (-3, -12.5))
        make_face()
        with BuildLine():
            ThreePointArc((0, -12.5), (1.5, -12.409673646), (2.978321675, -12.14))
            ThreePointArc((2.978321675, -12.14), (0, -9.5), (-2.978321675, -12.14))
            ThreePointArc((-2.978321675, -12.14), (-1.5, -12.409673646), (0, -12.5))
        make_face()
        with BuildLine():
            ThreePointArc((3, -12.5), (2.9945755146, -12.3196739413), (2.978321675, -12.14))
            ThreePointArc((2.978321675, -12.14), (1.5, -12.409673646), (0, -12.5))
            Line((0, -12.5), (3, -12.5))
        make_face()
        with BuildLine():
            Line((-3, -12.5), (0, -12.5))
            ThreePointArc((0, -12.5), (-1.5, -12.409673646), (-2.978321675, -12.14))
            ThreePointArc((-2.978321675, -12.14), (-2.9945755146, -12.3196739413), (-3, -12.5))
        make_face()
    extrude(amount=-F9_DEPTH)

    # F10
    f10_edges = [f4b.edges().sort_by_distance(p)[0] for p in [
        (2.978322, -12.86, -3),
        (12.5, 3, -3),
    ]]
    chamfer(f10_edges, length=F10_SIZE)


with BuildPart() as f12_tool:
    # F11 (on Front) → F12 (new body, symmetric)
    with BuildSketch(Plane.XZ):
        Polygon((19.8633912951, 45), (-19.8633912951, 45), (-19.8633912951, 5), (0, 5), (19.8633912951, 5), align=None)
    extrude(amount=F12_DEPTH, both=True)


with BuildPart() as f2_1:
    add(f2.part)

    # F12: intersect by f12_tool
    add(f12_tool.part, mode=Mode.INTERSECT)


with BuildPart() as f4_1:
    add(f4.part)

    # F12: intersect by f12_tool
    add(f12_tool.part, mode=Mode.INTERSECT)


with BuildPart() as f4b_1:
    add(f4b.part)

    # F12: intersect by f12_tool
    add(f12_tool.part, mode=Mode.INTERSECT)


solid = Compound([f2_1.part, f4_1.part, f4b_1.part])
